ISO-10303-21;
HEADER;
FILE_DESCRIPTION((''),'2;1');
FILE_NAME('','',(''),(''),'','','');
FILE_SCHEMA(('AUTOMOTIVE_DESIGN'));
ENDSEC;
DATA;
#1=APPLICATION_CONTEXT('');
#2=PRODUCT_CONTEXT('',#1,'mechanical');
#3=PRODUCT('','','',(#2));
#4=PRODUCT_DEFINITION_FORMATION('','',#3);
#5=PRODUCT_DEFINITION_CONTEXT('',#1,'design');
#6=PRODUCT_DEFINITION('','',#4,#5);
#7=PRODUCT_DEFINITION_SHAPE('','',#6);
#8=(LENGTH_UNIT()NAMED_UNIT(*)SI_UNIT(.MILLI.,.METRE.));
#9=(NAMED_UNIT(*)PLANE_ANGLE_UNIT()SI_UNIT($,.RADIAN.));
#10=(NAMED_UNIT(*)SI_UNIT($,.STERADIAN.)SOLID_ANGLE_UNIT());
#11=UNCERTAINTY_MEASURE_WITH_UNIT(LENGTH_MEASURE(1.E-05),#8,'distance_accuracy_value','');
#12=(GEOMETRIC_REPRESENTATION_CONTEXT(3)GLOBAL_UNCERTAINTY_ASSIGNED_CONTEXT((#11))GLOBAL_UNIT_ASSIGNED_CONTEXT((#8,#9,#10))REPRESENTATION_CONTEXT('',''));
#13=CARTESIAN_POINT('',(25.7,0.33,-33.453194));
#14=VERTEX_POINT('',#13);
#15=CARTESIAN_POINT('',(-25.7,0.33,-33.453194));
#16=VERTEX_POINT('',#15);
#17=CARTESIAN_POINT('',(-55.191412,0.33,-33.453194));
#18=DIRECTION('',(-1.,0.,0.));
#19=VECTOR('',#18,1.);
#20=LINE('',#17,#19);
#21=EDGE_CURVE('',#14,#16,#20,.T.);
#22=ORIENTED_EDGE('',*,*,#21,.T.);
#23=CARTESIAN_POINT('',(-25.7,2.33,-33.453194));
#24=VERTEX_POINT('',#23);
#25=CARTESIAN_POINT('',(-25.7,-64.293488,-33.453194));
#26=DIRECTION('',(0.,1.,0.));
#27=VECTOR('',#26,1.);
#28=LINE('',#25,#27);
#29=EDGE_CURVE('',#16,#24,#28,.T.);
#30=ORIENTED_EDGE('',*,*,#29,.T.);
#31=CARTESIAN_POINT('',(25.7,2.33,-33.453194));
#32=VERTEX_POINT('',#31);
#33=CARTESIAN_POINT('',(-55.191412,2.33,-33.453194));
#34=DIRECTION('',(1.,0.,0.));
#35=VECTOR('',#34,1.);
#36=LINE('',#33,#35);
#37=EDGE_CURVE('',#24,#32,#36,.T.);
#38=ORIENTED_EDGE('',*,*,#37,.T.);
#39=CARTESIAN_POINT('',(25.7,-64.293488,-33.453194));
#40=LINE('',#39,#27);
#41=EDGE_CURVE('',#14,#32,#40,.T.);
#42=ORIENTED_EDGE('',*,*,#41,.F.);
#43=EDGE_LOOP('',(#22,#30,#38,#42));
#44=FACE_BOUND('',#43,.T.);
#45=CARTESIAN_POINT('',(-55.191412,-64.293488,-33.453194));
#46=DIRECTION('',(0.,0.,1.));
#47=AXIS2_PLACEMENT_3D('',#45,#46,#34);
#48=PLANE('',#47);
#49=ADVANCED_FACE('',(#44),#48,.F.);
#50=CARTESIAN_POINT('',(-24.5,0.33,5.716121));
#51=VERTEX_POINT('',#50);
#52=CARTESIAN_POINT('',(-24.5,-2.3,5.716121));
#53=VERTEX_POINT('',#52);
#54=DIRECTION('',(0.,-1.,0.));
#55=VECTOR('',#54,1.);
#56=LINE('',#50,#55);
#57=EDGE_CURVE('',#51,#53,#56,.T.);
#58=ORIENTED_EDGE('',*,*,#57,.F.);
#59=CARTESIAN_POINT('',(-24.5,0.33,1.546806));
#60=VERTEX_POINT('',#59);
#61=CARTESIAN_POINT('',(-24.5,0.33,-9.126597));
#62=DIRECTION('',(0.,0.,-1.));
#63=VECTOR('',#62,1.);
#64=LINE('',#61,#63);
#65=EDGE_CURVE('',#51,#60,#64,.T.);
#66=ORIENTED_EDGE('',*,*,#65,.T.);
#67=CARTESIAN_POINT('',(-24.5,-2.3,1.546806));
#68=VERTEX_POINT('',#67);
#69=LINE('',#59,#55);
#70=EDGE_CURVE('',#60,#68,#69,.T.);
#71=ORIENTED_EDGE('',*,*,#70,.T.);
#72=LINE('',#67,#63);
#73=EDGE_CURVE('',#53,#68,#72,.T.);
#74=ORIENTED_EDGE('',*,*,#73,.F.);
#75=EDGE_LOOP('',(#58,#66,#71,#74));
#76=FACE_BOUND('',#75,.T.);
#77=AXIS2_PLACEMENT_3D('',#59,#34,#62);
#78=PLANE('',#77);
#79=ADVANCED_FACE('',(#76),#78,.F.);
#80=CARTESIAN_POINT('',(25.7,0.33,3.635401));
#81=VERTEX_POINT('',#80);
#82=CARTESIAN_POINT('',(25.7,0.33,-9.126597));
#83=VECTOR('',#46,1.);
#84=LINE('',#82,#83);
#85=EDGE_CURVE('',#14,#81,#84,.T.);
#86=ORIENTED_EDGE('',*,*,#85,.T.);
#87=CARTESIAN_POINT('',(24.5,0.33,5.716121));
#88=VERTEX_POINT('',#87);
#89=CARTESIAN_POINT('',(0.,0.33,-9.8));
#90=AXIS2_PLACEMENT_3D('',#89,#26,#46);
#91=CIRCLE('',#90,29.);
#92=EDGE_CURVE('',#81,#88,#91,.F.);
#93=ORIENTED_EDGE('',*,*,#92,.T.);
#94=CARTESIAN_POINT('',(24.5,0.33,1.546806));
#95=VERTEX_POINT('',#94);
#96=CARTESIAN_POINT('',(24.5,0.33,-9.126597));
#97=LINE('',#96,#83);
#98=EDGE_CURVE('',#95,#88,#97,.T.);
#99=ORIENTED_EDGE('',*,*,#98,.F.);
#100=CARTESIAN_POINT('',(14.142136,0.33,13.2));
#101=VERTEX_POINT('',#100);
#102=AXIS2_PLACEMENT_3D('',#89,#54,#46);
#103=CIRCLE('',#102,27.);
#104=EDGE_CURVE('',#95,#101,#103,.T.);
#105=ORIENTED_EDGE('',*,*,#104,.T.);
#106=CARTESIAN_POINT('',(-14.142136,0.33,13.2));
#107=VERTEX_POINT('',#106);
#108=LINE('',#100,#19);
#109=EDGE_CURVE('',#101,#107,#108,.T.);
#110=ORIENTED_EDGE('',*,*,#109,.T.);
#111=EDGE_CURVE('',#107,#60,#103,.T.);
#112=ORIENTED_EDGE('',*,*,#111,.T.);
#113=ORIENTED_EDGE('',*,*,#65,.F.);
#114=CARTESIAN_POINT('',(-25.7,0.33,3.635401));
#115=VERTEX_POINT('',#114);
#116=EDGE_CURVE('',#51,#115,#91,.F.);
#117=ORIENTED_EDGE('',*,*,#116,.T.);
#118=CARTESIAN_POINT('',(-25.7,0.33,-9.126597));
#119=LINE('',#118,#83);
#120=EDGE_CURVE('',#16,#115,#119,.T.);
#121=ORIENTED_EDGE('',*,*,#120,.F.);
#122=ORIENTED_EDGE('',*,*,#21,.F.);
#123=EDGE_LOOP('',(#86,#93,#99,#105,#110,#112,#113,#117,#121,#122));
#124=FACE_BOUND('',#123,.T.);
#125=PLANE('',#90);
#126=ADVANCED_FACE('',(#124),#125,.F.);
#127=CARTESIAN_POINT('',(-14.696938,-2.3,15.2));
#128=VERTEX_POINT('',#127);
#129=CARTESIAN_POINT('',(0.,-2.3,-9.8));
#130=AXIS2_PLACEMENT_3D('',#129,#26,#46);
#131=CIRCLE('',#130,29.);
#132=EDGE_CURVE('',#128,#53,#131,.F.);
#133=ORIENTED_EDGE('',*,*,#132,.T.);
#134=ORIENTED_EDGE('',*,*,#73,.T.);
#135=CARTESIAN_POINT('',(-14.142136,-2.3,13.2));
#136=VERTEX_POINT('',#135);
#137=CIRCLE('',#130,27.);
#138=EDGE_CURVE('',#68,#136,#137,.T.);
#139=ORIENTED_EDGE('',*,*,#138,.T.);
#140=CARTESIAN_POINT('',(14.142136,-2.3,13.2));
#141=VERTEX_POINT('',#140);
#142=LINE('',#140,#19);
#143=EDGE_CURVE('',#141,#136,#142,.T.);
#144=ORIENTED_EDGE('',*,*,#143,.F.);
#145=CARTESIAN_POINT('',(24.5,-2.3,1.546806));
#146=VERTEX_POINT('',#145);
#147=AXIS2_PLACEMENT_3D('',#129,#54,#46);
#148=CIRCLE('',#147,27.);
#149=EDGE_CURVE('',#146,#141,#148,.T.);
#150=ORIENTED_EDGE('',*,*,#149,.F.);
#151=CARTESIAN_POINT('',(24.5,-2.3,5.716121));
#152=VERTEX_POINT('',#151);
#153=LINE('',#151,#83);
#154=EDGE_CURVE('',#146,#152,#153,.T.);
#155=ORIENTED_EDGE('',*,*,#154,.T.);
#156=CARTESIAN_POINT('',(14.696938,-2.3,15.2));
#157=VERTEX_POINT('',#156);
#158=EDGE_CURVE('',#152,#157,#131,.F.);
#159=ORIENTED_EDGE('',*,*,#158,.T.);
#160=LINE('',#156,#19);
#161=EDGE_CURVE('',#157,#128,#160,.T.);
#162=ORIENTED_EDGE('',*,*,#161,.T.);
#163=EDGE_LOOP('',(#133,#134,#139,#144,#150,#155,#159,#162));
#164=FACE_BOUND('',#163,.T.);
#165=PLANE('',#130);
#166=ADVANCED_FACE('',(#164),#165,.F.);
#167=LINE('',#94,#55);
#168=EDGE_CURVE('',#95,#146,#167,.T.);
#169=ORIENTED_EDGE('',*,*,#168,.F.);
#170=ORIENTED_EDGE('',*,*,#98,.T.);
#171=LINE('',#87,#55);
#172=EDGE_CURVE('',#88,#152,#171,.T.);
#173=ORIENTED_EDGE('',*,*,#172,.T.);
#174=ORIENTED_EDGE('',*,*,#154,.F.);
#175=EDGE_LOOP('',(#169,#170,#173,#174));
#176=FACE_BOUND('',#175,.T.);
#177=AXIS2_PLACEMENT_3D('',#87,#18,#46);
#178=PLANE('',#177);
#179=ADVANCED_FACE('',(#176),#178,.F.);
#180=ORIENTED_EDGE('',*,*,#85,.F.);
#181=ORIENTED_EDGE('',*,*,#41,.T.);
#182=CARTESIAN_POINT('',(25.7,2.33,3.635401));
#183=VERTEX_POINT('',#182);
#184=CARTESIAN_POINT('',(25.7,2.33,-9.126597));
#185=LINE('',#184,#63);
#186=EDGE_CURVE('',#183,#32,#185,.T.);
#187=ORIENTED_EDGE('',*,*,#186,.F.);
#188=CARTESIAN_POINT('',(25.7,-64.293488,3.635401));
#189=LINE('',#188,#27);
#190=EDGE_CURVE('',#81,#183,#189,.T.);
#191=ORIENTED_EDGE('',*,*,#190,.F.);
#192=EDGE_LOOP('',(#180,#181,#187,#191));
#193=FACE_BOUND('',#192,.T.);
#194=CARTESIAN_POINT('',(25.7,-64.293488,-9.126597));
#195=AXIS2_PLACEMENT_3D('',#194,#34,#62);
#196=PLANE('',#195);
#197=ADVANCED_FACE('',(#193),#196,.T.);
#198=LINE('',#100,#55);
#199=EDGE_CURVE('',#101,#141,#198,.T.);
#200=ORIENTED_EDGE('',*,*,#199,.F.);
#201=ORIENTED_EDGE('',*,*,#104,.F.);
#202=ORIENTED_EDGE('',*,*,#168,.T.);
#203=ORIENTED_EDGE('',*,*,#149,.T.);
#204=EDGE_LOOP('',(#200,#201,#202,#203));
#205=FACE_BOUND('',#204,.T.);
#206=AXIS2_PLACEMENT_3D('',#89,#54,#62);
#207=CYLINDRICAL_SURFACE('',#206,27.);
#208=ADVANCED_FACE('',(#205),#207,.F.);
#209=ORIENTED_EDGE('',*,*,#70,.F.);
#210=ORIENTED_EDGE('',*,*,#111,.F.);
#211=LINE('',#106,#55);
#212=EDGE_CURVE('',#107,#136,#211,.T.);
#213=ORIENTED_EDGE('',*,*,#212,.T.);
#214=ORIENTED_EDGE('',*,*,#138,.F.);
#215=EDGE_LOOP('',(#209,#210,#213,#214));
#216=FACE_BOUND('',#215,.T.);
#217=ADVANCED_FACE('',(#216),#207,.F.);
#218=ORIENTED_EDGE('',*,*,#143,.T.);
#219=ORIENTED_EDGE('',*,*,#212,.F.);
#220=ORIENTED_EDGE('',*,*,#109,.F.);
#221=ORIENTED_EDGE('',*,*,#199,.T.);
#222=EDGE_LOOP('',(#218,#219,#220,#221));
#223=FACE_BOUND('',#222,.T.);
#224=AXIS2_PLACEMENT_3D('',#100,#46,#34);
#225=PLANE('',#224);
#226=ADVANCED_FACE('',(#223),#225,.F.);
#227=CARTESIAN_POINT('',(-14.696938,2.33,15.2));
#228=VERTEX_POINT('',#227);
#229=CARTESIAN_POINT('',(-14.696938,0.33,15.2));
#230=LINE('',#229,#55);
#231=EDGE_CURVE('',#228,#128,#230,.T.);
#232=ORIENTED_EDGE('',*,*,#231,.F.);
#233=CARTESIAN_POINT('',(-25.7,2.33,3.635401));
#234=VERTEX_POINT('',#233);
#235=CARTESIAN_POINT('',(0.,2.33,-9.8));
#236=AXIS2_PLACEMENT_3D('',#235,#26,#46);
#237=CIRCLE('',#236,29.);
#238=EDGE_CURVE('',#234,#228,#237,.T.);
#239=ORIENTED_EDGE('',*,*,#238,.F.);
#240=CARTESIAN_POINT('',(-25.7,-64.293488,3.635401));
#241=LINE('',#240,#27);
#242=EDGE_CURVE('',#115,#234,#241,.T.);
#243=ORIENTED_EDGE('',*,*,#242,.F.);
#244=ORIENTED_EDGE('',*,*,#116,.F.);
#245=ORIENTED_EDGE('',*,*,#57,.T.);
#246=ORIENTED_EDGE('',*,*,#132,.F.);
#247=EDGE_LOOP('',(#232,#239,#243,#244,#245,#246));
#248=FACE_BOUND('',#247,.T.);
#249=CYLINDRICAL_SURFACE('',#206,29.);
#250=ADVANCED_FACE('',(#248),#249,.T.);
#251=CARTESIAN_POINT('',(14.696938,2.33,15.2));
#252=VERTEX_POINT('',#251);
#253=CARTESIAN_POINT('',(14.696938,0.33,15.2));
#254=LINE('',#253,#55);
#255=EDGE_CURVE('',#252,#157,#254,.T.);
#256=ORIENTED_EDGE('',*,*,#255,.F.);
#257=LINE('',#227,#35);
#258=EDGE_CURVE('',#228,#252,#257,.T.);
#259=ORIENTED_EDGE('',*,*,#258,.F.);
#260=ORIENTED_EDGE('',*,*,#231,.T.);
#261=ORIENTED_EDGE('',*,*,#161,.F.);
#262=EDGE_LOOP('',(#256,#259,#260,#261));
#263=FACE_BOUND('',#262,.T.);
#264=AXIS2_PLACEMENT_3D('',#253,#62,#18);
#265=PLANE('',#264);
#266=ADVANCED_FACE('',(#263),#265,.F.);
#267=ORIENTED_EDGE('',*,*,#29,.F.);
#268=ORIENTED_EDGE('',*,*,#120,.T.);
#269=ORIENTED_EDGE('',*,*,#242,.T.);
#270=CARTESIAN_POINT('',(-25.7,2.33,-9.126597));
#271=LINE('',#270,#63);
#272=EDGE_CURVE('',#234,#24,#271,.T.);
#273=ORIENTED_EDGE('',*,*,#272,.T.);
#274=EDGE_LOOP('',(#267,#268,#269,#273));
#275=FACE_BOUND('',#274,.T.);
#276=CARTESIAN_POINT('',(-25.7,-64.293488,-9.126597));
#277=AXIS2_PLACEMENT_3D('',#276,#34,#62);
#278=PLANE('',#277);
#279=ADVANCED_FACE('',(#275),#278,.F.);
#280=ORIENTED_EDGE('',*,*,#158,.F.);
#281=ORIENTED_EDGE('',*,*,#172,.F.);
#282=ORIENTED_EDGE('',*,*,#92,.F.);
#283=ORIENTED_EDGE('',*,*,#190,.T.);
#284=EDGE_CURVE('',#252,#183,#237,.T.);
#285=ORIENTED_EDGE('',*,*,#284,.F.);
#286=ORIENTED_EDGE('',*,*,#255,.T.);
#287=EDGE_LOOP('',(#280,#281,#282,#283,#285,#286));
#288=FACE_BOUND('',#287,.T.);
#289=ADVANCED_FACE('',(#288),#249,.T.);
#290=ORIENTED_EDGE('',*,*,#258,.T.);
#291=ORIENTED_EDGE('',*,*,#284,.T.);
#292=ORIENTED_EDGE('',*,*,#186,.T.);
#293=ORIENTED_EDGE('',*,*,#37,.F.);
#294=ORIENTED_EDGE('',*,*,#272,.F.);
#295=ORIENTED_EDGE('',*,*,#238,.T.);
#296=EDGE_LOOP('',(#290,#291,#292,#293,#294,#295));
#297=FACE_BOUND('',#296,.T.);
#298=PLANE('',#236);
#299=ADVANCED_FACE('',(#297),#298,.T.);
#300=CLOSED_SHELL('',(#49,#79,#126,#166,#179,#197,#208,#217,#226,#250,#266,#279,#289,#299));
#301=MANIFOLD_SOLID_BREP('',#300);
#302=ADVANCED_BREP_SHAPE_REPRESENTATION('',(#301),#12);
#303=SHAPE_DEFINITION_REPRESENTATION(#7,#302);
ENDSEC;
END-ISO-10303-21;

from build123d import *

# Parameters (mm, degrees)
STOCK_COMPARTMENT_START            = 0.33
STOCK_COMPARTMENT_BOTTOM_1_DEPTH   = 2
STOCK_COMPARTMENT_START_2          = -2.3
STOCK_COMPARTMENT_BOTTOM_1_2_DEPTH = 2.63
BOSS_EXTRUDE1_START                = -2
BOSS_EXTRUDE1_DEPTH                = 2


# Read off the part's stored shape, not the designer's step: Stock-Compartment Bottom-1
with BuildPart() as part:
    # Stock-Compartment Bottom-1 outline → Stock-Compartment Bottom-1 (new body)
    with BuildSketch(Plane(origin=(0, 0, 0), x_dir=(1, 0, 0), z_dir=(0, 1, 0)).offset(STOCK_COMPARTMENT_START)):
        with BuildLine():
            Line((24.5, -5.716120649), (24.5, 8.453194282))
            Line((24.5, 8.453194282), (-24.5, 8.453194282))
            Line((-24.5, 8.453194282), (-24.5, -5.716120649))
            ThreePointArc((-24.5, -5.716120649), (-20.163977484, -11.042600894), (-14.696938457, -15.2))
            Line((-14.696938457, -15.2), (14.696938457, -15.2))
            ThreePointArc((14.696938457, -15.2), (20.163977484, -11.042600894), (24.5, -5.716120649))
        make_face()
    extrude(amount=STOCK_COMPARTMENT_BOTTOM_1_DEPTH)

    # Stock-Compartment Bottom-1 2 outline → Stock-Compartment Bottom-1 2 (add)
    with BuildSketch(Plane(origin=(0, 0, 0), x_dir=(1, 0, 0), z_dir=(0, 1, 0)).offset(STOCK_COMPARTMENT_START_2)):
        with BuildLine():
            Line((24.5, -5.716120649), (24.5, -1.546805718))
            ThreePointArc((24.5, -1.546805718), (20.180507814, -8.137310399), (14.142135624, -13.2))
            Line((14.142135624, -13.2), (-14.142135624, -13.2))
            ThreePointArc((-14.142135624, -13.2), (-20.180507814, -8.137310399), (-24.5, -1.546805718))
            Line((-24.5, -1.546805718), (-24.5, -5.716120649))
            ThreePointArc((-24.5, -5.716120649), (-20.163977484, -11.042600894), (-14.696938457, -15.2))
            Line((-14.696938457, -15.2), (14.696938457, -15.2))
            ThreePointArc((14.696938457, -15.2), (20.163977484, -11.042600894), (24.5, -5.716120649))
        make_face()
    extrude(amount=STOCK_COMPARTMENT_BOTTOM_1_2_DEPTH)

    # Sketch1 → Boss-Extrude1 (add)
    with BuildSketch(Plane(origin=(0, 2.33, 0), x_dir=(1, 0, 0), z_dir=(0, 1, 0)).offset(BOSS_EXTRUDE1_START)):
        with BuildLine():
            Line((-25.7, 33.453194282), (-25.7, 8.453194282))
            Line((-25.7, 8.453194282), (-25.7, -3.635400999))
            ThreePointArc((-25.7, -3.635400999), (-25.121551476, -4.688190068), (-24.5, -5.716120649))
            Line((-24.5, -5.716120649), (-24.5, 8.453194282))
            Line((-24.5, 8.453194282), (24.5, 8.453194282))
            Line((24.5, 8.453194282), (24.5, -5.716120649))
            ThreePointArc((24.5, -5.716120649), (25.121551476, -4.688190068), (25.7, -3.635400999))
            Line((25.7, -3.635400999), (25.7, 8.453194282))
            Line((25.7, 8.453194282), (25.7, 33.453194282))
            Line((25.7, 33.453194282), (-25.7, 33.453194282))
        make_face()
    extrude(amount=BOSS_EXTRUDE1_DEPTH)


solid = part.part
